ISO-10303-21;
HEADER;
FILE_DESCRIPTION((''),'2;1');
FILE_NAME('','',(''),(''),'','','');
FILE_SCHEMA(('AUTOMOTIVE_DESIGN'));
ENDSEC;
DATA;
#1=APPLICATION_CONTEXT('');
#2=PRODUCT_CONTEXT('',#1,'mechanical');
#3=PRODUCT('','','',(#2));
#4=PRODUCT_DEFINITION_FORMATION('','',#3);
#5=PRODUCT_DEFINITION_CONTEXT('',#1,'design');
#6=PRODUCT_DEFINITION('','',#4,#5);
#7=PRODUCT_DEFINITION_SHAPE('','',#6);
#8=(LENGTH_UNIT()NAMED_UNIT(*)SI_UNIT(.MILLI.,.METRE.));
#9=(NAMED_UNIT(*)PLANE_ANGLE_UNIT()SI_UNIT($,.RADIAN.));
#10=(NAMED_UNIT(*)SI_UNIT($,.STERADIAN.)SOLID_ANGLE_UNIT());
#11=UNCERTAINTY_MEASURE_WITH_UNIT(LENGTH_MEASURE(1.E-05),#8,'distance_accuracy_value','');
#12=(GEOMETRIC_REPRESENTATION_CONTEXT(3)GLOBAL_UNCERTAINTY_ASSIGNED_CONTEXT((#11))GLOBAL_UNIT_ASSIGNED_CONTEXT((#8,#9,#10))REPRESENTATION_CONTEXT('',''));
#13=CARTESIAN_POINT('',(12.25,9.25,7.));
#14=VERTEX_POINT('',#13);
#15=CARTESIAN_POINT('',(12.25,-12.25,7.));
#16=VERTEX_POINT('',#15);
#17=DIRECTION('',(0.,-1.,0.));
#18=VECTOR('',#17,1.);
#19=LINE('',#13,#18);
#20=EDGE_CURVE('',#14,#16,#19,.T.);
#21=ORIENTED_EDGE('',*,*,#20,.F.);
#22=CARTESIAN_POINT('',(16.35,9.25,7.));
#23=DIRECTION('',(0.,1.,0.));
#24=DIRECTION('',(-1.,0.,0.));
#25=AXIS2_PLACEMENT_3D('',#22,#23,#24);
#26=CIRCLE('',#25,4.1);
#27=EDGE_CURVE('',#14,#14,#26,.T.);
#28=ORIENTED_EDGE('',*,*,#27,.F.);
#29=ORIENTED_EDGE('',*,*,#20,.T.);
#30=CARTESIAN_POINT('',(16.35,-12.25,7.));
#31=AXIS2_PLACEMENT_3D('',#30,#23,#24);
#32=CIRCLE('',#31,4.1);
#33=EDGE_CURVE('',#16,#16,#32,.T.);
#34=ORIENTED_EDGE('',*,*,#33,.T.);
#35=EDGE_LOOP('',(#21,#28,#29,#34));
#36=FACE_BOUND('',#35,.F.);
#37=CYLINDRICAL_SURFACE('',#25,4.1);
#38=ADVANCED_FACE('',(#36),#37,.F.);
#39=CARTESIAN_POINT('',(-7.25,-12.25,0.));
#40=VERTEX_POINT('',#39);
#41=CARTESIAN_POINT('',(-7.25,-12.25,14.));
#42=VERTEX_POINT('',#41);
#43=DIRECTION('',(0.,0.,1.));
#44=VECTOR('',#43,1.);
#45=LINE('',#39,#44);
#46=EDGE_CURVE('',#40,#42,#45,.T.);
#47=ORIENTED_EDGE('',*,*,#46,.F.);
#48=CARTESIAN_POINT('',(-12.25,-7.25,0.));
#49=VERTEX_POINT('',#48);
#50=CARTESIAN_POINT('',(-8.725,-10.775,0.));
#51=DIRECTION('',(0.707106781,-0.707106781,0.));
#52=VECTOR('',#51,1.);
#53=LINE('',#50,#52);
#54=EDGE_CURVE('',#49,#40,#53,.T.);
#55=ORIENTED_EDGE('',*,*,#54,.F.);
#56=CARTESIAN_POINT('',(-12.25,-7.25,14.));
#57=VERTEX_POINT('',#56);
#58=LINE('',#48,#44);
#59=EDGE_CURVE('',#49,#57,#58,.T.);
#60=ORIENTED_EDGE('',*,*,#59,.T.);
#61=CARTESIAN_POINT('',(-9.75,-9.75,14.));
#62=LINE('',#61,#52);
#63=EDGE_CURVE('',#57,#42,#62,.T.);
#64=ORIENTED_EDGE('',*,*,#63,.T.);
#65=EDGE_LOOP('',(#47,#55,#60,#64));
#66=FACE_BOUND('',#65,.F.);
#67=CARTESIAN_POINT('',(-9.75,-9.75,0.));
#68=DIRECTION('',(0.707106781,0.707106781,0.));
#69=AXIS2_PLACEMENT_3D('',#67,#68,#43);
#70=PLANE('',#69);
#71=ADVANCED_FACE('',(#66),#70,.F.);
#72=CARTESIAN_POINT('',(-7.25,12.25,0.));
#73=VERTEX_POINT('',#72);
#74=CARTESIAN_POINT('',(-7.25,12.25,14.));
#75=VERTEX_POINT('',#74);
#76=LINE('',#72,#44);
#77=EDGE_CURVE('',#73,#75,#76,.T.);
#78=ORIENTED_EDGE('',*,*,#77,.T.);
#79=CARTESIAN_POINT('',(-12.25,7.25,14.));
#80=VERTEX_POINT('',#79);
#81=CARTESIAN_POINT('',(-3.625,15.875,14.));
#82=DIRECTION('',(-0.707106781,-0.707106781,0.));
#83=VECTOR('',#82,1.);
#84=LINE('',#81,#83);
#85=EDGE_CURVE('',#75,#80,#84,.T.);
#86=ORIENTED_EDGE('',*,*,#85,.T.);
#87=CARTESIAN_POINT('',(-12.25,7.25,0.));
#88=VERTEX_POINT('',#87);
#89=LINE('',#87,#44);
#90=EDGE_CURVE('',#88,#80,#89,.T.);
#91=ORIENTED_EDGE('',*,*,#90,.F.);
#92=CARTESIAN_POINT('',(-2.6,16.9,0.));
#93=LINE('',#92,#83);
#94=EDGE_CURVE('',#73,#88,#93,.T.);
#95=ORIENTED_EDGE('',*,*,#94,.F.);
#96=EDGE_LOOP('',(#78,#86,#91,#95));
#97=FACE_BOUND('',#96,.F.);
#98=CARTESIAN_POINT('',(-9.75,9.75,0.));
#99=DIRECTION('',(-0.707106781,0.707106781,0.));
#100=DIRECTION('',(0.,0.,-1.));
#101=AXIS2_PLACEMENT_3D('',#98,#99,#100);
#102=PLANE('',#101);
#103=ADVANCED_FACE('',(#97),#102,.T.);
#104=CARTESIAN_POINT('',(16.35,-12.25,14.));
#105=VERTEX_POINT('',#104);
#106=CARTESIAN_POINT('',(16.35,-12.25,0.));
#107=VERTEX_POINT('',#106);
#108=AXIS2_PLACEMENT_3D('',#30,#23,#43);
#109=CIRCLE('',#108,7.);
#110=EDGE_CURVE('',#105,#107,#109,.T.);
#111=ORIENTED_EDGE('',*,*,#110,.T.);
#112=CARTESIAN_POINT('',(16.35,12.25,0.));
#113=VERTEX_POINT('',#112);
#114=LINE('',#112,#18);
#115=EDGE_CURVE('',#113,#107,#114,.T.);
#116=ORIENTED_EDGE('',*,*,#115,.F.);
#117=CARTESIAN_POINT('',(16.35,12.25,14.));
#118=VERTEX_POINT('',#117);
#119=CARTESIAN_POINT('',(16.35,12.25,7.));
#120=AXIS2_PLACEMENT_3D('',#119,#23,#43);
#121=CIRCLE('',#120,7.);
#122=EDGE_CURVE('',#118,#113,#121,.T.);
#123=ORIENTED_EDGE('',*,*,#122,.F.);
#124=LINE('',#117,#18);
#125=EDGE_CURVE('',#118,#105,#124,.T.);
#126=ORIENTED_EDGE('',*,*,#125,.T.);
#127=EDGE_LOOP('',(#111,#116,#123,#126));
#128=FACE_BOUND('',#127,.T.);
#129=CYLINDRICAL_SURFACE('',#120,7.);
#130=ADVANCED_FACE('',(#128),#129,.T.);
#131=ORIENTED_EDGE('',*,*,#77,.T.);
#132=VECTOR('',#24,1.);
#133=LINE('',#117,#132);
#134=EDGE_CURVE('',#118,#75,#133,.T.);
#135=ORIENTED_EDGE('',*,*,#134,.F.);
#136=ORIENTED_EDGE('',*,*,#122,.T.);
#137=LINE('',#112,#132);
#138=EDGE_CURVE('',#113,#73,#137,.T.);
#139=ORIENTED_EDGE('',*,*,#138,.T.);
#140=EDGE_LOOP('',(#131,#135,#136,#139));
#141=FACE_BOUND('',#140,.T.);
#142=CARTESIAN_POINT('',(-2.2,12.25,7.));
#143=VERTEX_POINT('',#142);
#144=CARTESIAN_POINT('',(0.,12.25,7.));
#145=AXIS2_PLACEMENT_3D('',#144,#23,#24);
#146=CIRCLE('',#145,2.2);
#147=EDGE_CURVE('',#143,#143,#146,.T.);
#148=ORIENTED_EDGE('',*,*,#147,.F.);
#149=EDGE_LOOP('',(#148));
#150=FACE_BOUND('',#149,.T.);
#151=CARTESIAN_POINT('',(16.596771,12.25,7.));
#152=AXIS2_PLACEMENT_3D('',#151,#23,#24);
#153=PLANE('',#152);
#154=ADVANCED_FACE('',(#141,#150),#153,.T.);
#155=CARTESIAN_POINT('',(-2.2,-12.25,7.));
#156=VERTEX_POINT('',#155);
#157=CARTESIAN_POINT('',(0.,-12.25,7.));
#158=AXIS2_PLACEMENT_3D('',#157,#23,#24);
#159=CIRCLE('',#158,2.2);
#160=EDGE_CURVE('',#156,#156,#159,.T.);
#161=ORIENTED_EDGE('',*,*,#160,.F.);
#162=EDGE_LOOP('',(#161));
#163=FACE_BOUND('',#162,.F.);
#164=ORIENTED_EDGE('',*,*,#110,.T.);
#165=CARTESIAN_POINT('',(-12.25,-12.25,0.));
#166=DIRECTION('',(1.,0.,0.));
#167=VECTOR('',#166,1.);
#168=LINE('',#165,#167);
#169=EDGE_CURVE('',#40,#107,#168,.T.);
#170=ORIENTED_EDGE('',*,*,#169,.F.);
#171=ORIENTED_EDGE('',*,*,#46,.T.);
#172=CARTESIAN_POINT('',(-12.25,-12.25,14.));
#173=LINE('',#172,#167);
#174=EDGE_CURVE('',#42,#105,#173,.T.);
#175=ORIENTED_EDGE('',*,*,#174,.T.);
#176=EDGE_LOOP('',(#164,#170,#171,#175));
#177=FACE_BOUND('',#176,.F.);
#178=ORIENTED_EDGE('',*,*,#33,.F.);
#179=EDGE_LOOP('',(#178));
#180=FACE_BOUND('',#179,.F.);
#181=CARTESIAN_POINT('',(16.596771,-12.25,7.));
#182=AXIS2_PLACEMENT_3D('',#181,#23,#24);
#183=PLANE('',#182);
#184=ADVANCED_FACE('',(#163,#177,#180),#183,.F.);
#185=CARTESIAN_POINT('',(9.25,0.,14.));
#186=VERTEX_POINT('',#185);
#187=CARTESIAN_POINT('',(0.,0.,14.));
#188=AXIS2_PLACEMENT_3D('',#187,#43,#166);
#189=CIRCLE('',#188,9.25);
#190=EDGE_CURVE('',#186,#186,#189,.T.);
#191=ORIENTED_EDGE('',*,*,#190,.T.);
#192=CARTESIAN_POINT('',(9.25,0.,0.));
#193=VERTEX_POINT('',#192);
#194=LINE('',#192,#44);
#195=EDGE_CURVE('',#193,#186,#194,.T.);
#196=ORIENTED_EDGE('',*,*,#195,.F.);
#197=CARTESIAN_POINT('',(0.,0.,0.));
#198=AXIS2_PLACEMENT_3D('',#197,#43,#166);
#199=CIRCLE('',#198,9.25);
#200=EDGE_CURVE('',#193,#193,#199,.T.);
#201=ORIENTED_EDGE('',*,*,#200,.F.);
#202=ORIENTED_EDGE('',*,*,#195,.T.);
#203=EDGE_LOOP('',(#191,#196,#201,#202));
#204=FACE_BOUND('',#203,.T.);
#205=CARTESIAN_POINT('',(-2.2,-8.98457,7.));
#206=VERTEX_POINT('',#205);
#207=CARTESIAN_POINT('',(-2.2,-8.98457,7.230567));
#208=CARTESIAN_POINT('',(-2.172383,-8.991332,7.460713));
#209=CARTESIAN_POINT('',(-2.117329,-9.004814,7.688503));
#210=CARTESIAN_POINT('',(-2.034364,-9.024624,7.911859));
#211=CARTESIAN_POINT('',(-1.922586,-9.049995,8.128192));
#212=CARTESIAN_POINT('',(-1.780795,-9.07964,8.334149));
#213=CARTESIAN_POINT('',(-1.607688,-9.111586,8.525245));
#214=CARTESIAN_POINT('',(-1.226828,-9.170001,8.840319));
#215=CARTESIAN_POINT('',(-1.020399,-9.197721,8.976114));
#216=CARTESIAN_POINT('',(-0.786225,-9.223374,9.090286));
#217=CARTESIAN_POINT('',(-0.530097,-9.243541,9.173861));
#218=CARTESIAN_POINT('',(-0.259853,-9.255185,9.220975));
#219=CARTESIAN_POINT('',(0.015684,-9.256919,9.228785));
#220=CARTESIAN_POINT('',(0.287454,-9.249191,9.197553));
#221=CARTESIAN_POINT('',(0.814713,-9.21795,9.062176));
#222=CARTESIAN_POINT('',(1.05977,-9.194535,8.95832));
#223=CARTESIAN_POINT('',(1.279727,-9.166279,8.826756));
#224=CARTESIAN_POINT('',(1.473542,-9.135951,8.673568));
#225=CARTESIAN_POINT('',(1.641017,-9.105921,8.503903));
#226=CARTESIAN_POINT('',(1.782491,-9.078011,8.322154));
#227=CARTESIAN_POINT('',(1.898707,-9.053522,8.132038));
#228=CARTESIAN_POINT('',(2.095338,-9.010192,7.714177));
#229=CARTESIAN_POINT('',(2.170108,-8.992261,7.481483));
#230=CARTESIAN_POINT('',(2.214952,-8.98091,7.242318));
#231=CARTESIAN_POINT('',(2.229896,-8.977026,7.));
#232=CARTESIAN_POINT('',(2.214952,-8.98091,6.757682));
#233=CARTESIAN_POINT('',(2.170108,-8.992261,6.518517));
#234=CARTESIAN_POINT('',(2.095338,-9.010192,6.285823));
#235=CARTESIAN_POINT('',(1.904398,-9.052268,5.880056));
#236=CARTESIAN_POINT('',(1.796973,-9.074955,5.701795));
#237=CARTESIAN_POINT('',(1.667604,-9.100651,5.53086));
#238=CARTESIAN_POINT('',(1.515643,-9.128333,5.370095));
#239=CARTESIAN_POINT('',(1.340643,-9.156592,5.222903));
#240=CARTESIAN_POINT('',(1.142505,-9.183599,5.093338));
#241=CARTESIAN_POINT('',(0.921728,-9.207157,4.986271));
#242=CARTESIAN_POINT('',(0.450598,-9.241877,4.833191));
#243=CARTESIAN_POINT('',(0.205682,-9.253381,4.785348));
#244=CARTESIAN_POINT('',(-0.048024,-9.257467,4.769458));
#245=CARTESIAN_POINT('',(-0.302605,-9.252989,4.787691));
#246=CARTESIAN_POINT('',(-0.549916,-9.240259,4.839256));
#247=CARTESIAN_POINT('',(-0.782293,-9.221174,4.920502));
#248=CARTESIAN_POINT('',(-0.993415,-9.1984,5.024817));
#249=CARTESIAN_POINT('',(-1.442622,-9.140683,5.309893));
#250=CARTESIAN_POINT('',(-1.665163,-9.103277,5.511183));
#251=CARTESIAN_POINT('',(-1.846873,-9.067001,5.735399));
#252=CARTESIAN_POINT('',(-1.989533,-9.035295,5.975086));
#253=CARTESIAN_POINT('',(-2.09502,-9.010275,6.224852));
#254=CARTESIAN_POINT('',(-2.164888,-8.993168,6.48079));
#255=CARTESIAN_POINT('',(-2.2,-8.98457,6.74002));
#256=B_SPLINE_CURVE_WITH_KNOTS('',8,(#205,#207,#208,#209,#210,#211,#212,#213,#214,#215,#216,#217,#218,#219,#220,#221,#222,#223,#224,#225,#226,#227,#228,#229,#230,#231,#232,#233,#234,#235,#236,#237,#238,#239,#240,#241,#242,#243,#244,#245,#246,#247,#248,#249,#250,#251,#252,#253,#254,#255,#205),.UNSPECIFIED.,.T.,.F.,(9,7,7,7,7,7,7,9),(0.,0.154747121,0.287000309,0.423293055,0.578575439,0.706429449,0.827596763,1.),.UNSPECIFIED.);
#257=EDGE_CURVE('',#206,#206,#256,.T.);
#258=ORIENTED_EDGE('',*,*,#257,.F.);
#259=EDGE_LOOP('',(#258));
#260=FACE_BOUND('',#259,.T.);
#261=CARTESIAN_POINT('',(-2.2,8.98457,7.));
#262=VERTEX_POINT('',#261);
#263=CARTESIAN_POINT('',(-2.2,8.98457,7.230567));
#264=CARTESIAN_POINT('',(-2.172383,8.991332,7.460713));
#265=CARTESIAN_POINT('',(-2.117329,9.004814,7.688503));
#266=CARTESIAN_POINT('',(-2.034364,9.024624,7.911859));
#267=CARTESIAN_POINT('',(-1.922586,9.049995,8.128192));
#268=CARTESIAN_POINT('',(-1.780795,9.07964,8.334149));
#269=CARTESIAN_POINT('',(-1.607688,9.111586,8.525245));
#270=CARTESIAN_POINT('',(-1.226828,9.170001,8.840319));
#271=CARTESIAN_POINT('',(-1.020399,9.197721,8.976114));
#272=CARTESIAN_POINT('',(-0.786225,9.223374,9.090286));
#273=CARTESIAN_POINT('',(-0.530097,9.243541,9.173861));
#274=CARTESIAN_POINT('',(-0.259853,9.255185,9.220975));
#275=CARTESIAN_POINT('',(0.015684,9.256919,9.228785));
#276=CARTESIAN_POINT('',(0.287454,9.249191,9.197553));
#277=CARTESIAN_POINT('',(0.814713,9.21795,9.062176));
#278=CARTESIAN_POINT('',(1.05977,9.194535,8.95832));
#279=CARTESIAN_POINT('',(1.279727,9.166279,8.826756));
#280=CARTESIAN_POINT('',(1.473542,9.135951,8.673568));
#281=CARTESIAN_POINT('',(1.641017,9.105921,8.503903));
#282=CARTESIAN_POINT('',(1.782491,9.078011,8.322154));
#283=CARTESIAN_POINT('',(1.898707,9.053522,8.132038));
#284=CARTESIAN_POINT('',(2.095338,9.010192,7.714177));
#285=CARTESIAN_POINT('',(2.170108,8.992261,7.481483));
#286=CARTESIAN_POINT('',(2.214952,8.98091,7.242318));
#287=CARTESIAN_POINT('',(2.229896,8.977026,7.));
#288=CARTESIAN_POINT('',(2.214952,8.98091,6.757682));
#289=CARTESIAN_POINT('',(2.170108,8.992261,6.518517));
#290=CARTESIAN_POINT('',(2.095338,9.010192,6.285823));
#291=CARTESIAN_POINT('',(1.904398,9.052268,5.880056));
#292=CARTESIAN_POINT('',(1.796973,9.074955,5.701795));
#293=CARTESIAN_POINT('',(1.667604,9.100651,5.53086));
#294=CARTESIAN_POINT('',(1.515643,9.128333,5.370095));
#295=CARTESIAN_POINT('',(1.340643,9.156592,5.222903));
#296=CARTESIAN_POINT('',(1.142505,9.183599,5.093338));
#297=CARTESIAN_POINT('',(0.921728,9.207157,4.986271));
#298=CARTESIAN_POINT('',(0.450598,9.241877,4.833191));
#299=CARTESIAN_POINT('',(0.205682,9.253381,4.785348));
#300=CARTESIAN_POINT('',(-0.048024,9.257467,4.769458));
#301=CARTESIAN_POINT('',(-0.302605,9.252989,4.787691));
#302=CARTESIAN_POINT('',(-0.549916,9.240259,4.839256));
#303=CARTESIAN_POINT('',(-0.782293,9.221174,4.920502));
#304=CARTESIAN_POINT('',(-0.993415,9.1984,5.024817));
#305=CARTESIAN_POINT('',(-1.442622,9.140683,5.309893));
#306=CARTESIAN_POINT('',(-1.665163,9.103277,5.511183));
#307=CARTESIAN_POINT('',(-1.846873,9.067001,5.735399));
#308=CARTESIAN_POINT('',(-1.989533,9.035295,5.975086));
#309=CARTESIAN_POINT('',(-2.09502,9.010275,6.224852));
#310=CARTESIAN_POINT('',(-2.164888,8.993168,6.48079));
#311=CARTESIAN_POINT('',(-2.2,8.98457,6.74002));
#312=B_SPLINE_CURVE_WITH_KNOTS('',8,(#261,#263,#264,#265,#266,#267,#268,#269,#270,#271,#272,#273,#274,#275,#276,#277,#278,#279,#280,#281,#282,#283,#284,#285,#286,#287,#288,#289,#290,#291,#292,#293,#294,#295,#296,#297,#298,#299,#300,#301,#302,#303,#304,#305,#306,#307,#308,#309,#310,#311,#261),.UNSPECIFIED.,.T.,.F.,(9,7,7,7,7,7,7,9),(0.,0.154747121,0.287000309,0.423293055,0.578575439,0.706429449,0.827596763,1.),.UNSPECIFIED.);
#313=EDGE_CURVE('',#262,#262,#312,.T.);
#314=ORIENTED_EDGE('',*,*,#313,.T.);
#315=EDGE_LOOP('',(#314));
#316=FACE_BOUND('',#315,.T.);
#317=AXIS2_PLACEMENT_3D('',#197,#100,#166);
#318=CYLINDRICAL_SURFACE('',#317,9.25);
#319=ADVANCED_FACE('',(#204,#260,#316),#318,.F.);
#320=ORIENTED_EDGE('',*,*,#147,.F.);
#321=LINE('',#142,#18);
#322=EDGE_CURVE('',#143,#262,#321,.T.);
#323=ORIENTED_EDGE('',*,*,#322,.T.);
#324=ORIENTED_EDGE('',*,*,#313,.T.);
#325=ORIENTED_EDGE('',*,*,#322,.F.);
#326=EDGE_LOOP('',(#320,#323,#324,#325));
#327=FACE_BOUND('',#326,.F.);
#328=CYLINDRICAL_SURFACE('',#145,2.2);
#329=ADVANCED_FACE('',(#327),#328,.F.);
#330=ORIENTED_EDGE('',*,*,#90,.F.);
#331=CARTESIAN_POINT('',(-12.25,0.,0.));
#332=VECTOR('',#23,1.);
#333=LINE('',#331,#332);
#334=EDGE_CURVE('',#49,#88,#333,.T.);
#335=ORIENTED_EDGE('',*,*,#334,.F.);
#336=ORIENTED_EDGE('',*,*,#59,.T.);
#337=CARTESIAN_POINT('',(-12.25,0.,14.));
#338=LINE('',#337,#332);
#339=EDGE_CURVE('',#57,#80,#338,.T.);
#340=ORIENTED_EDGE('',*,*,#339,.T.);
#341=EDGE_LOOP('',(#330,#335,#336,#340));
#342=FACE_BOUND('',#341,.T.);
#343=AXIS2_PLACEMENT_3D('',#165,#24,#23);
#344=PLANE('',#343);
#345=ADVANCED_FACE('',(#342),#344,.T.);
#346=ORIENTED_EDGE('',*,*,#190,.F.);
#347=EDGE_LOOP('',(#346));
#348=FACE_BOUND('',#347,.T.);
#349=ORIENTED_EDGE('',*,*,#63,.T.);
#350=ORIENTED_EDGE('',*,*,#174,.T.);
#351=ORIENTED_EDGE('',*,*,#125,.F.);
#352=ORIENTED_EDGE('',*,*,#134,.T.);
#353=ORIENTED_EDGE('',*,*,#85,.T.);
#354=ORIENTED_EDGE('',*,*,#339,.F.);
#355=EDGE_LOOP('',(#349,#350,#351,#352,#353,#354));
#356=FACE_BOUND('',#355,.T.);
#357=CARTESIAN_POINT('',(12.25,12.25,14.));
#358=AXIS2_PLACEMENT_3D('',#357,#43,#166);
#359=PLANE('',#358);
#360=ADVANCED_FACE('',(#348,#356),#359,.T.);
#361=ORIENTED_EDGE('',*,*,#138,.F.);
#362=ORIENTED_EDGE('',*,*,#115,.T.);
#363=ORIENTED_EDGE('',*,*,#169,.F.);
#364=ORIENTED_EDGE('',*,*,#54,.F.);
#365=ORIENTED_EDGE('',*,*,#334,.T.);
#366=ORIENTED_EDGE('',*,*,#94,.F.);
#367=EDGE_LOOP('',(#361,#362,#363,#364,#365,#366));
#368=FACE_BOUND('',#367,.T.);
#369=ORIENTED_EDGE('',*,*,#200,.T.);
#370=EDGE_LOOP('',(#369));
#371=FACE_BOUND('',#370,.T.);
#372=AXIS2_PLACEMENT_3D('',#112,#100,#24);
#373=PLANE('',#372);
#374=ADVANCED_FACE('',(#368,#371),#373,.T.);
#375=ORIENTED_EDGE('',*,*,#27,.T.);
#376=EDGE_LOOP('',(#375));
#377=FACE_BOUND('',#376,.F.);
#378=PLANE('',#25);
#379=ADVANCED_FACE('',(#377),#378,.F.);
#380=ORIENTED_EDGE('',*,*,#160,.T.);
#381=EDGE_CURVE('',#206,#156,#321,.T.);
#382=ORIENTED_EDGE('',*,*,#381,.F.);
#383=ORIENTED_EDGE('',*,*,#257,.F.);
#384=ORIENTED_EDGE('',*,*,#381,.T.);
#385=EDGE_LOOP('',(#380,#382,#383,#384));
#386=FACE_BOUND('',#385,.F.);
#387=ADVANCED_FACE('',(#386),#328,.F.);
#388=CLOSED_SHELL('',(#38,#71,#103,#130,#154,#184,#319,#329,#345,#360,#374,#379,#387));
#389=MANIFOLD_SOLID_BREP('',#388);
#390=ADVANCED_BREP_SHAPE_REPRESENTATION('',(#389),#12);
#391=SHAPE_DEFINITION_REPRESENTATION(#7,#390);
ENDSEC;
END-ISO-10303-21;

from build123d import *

# Parameters (mm, degrees)
F0_W     = 24.5
F0_H     = 24.5
F0_R     = 9.25
F1_DEPTH = 14
F2_R     = 2.2
F3_DEPTH = 24.5
F2_R_2   = 4.1
F4_DEPTH = 24.5
F5_START = -3
F5_DEPTH = 21.5
F6_SIZE  = 5


# Not quite as in the source:
# - a feature of the source that left no trace in its solid (it failed there, or was rolled back) is left out


with BuildPart() as f1:
    # F0 (on Top) → F1 (new body)
    with BuildSketch(Plane.XY):
        Rectangle(F0_W, F0_H)
        Circle(F0_R, mode=Mode.SUBTRACT)
    extrude(amount=F1_DEPTH)

    # F2 (on face) → F3 (cut, through all)
    with BuildSketch(Plane(origin=(0, 12.25, 0), x_dir=(-1, 0, 0), z_dir=(0, 1, 0))):
        with Locations((0, 7)):
            Circle(F2_R)
    extrude(amount=-F3_DEPTH, mode=Mode.SUBTRACT)

    # F2 (on face) → F4 (join, through all)
    with BuildSketch(Plane(origin=(0, 12.25, 0), x_dir=(-1, 0, 0), z_dir=(0, 1, 0))):
        with BuildLine():
            Line((-12.25, 7), (-12.25, 14))
            Line((-12.25, 14), (-16.35, 14))
            ThreePointArc((-16.35, 14), (-23.35, 7), (-16.35, 0))
            Line((-16.35, 0), (-12.25, 0))
            Line((-12.25, 0), (-12.25, 7))
        make_face()
        with Locations((-16.35, 7)):
            Circle(F2_R_2, mode=Mode.SUBTRACT)
        with Locations((-16.35, 7)):
            Circle(F2_R_2)
    extrude(amount=-F4_DEPTH)

    # F2 (on face) → F5 (cut)
    with BuildSketch(Plane(origin=(0, 12.25, 0), x_dir=(-1, 0, 0), z_dir=(0, 1, 0)).offset(F5_START)):
        with Locations((-16.35, 7)):
            Circle(F2_R_2)
    extrude(amount=-F5_DEPTH, mode=Mode.SUBTRACT)

    # F6
    f6_edges = [f1.edges().sort_by_distance(p)[0] for p in [
        (-12.25, 12.25, 7),
        (-12.25, -12.25, 7),
    ]]
    chamfer(f6_edges, length=F6_SIZE)


solid = f1.part
